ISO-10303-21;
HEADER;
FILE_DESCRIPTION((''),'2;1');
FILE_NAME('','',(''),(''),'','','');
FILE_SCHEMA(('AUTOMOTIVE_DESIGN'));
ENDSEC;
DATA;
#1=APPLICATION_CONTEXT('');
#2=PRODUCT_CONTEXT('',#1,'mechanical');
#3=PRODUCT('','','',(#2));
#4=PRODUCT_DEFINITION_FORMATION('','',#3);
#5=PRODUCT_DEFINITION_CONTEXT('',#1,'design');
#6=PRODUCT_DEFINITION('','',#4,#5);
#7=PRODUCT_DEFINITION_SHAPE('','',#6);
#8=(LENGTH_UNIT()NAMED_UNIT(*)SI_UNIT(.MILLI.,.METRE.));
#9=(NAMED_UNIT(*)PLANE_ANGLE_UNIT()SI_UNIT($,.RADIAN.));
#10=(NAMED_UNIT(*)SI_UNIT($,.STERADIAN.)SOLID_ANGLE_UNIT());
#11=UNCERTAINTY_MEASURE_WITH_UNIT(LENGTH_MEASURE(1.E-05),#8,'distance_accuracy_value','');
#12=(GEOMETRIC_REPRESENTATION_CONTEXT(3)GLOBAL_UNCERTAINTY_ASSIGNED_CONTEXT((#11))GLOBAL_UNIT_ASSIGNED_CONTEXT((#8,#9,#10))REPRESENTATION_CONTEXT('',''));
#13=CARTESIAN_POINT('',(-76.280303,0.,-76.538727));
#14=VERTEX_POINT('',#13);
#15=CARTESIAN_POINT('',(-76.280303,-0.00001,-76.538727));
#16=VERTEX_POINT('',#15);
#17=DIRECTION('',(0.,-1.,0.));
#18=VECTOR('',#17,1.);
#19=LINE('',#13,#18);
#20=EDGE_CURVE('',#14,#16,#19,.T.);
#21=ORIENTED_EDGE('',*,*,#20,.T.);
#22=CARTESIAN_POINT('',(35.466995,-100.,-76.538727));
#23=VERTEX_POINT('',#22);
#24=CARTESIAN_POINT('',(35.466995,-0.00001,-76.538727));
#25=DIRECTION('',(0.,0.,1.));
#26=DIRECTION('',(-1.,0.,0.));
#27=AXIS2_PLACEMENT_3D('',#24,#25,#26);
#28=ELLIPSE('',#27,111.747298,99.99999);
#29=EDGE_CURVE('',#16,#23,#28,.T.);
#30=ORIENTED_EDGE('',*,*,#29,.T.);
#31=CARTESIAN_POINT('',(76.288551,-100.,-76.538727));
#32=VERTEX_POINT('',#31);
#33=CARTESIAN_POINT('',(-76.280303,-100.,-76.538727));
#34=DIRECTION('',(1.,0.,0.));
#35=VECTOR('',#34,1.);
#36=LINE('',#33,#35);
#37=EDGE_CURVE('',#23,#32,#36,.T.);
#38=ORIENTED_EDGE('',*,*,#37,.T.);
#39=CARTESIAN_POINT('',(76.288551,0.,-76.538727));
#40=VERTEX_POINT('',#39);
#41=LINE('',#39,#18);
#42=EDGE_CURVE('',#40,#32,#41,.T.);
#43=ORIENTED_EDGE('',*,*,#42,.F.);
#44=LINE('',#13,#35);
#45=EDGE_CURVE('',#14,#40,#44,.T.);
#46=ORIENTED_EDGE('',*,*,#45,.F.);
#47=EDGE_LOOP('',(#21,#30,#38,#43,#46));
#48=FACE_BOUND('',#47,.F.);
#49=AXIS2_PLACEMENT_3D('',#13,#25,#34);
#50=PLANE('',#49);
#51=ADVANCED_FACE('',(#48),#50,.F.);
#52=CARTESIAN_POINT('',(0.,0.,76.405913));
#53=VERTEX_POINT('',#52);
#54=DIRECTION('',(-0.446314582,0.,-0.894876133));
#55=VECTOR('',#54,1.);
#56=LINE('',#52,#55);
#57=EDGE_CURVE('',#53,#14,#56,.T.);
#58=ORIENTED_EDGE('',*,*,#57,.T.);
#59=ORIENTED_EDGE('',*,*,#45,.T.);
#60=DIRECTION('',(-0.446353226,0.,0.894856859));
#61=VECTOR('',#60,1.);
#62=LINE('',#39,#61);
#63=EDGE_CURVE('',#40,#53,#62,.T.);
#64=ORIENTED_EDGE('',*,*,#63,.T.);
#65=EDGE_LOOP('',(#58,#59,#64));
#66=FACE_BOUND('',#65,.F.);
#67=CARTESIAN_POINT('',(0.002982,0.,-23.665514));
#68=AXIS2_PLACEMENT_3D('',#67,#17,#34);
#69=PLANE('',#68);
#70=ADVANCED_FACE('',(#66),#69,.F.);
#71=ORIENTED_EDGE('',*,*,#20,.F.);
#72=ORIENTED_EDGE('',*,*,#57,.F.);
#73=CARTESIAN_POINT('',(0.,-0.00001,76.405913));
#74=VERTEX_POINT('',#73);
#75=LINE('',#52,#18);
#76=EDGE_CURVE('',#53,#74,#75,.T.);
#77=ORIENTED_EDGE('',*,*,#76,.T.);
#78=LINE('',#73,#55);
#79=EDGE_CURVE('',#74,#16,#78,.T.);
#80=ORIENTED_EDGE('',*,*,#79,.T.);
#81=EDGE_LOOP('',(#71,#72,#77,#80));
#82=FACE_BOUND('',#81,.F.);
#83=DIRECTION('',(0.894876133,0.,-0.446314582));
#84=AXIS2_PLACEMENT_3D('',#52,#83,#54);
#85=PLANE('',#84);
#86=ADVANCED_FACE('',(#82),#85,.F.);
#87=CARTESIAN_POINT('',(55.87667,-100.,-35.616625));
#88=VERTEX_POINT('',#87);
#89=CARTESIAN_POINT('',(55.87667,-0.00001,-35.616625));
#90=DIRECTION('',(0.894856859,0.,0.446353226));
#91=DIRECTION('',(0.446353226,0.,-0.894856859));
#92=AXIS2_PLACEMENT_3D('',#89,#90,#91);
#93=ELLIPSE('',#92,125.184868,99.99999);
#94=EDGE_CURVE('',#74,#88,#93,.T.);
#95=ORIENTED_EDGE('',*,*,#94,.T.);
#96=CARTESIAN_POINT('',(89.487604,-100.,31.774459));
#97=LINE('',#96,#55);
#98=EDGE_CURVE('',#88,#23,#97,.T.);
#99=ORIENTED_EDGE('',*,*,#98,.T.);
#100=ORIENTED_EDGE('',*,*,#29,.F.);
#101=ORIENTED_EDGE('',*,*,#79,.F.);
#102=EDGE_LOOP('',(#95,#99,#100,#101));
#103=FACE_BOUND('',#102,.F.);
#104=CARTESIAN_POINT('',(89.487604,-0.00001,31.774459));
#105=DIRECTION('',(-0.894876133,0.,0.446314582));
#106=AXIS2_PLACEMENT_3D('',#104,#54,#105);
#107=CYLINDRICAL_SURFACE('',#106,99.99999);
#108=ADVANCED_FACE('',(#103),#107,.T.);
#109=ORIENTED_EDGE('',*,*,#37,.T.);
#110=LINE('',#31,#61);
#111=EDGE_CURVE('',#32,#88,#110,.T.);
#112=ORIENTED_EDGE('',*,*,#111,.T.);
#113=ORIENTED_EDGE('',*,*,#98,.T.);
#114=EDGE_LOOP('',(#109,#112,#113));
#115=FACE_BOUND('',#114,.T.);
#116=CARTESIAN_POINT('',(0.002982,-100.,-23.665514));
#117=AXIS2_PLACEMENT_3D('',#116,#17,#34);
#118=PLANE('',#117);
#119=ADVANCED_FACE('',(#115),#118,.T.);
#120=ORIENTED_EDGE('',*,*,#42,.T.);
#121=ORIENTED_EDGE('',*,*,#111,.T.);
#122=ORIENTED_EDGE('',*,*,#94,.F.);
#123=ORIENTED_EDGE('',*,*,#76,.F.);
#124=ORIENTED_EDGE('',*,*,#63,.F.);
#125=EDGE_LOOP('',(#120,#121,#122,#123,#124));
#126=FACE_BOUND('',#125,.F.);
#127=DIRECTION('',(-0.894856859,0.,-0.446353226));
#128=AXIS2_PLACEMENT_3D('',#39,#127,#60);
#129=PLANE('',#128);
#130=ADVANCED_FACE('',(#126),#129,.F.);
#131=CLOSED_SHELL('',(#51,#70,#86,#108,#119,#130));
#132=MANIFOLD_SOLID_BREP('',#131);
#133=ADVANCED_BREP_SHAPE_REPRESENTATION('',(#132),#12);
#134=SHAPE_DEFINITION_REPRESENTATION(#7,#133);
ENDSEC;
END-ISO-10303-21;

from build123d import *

# Parameters (mm, degrees)
F1_DEPTH = 100
F2_R     = 99.99999


# Not quite as in the source:
# - a fillet or chamfer is up to 0.001 mm smaller than in the source, because OpenCascade refuses the exact size


with BuildPart() as f1:
    # F0 (on Front) → F1 (new body)
    with BuildSketch(Plane.XZ):
        Polygon((76.2885510921, -76.5387266874), (0, 76.4059126377), (-76.2803032994, -76.5387266874), align=None)
    extrude(amount=F1_DEPTH)

    # F2 (radius 100 in the source; OpenCascade refuses exactly that, so slightly less here)
    f2_edges = [f1.edges().sort_by_distance(p)[0] for p in [
        (-38.140152, -100, -0.066407),
    ]]
    fillet(f2_edges, radius=F2_R)


solid = f1.part
